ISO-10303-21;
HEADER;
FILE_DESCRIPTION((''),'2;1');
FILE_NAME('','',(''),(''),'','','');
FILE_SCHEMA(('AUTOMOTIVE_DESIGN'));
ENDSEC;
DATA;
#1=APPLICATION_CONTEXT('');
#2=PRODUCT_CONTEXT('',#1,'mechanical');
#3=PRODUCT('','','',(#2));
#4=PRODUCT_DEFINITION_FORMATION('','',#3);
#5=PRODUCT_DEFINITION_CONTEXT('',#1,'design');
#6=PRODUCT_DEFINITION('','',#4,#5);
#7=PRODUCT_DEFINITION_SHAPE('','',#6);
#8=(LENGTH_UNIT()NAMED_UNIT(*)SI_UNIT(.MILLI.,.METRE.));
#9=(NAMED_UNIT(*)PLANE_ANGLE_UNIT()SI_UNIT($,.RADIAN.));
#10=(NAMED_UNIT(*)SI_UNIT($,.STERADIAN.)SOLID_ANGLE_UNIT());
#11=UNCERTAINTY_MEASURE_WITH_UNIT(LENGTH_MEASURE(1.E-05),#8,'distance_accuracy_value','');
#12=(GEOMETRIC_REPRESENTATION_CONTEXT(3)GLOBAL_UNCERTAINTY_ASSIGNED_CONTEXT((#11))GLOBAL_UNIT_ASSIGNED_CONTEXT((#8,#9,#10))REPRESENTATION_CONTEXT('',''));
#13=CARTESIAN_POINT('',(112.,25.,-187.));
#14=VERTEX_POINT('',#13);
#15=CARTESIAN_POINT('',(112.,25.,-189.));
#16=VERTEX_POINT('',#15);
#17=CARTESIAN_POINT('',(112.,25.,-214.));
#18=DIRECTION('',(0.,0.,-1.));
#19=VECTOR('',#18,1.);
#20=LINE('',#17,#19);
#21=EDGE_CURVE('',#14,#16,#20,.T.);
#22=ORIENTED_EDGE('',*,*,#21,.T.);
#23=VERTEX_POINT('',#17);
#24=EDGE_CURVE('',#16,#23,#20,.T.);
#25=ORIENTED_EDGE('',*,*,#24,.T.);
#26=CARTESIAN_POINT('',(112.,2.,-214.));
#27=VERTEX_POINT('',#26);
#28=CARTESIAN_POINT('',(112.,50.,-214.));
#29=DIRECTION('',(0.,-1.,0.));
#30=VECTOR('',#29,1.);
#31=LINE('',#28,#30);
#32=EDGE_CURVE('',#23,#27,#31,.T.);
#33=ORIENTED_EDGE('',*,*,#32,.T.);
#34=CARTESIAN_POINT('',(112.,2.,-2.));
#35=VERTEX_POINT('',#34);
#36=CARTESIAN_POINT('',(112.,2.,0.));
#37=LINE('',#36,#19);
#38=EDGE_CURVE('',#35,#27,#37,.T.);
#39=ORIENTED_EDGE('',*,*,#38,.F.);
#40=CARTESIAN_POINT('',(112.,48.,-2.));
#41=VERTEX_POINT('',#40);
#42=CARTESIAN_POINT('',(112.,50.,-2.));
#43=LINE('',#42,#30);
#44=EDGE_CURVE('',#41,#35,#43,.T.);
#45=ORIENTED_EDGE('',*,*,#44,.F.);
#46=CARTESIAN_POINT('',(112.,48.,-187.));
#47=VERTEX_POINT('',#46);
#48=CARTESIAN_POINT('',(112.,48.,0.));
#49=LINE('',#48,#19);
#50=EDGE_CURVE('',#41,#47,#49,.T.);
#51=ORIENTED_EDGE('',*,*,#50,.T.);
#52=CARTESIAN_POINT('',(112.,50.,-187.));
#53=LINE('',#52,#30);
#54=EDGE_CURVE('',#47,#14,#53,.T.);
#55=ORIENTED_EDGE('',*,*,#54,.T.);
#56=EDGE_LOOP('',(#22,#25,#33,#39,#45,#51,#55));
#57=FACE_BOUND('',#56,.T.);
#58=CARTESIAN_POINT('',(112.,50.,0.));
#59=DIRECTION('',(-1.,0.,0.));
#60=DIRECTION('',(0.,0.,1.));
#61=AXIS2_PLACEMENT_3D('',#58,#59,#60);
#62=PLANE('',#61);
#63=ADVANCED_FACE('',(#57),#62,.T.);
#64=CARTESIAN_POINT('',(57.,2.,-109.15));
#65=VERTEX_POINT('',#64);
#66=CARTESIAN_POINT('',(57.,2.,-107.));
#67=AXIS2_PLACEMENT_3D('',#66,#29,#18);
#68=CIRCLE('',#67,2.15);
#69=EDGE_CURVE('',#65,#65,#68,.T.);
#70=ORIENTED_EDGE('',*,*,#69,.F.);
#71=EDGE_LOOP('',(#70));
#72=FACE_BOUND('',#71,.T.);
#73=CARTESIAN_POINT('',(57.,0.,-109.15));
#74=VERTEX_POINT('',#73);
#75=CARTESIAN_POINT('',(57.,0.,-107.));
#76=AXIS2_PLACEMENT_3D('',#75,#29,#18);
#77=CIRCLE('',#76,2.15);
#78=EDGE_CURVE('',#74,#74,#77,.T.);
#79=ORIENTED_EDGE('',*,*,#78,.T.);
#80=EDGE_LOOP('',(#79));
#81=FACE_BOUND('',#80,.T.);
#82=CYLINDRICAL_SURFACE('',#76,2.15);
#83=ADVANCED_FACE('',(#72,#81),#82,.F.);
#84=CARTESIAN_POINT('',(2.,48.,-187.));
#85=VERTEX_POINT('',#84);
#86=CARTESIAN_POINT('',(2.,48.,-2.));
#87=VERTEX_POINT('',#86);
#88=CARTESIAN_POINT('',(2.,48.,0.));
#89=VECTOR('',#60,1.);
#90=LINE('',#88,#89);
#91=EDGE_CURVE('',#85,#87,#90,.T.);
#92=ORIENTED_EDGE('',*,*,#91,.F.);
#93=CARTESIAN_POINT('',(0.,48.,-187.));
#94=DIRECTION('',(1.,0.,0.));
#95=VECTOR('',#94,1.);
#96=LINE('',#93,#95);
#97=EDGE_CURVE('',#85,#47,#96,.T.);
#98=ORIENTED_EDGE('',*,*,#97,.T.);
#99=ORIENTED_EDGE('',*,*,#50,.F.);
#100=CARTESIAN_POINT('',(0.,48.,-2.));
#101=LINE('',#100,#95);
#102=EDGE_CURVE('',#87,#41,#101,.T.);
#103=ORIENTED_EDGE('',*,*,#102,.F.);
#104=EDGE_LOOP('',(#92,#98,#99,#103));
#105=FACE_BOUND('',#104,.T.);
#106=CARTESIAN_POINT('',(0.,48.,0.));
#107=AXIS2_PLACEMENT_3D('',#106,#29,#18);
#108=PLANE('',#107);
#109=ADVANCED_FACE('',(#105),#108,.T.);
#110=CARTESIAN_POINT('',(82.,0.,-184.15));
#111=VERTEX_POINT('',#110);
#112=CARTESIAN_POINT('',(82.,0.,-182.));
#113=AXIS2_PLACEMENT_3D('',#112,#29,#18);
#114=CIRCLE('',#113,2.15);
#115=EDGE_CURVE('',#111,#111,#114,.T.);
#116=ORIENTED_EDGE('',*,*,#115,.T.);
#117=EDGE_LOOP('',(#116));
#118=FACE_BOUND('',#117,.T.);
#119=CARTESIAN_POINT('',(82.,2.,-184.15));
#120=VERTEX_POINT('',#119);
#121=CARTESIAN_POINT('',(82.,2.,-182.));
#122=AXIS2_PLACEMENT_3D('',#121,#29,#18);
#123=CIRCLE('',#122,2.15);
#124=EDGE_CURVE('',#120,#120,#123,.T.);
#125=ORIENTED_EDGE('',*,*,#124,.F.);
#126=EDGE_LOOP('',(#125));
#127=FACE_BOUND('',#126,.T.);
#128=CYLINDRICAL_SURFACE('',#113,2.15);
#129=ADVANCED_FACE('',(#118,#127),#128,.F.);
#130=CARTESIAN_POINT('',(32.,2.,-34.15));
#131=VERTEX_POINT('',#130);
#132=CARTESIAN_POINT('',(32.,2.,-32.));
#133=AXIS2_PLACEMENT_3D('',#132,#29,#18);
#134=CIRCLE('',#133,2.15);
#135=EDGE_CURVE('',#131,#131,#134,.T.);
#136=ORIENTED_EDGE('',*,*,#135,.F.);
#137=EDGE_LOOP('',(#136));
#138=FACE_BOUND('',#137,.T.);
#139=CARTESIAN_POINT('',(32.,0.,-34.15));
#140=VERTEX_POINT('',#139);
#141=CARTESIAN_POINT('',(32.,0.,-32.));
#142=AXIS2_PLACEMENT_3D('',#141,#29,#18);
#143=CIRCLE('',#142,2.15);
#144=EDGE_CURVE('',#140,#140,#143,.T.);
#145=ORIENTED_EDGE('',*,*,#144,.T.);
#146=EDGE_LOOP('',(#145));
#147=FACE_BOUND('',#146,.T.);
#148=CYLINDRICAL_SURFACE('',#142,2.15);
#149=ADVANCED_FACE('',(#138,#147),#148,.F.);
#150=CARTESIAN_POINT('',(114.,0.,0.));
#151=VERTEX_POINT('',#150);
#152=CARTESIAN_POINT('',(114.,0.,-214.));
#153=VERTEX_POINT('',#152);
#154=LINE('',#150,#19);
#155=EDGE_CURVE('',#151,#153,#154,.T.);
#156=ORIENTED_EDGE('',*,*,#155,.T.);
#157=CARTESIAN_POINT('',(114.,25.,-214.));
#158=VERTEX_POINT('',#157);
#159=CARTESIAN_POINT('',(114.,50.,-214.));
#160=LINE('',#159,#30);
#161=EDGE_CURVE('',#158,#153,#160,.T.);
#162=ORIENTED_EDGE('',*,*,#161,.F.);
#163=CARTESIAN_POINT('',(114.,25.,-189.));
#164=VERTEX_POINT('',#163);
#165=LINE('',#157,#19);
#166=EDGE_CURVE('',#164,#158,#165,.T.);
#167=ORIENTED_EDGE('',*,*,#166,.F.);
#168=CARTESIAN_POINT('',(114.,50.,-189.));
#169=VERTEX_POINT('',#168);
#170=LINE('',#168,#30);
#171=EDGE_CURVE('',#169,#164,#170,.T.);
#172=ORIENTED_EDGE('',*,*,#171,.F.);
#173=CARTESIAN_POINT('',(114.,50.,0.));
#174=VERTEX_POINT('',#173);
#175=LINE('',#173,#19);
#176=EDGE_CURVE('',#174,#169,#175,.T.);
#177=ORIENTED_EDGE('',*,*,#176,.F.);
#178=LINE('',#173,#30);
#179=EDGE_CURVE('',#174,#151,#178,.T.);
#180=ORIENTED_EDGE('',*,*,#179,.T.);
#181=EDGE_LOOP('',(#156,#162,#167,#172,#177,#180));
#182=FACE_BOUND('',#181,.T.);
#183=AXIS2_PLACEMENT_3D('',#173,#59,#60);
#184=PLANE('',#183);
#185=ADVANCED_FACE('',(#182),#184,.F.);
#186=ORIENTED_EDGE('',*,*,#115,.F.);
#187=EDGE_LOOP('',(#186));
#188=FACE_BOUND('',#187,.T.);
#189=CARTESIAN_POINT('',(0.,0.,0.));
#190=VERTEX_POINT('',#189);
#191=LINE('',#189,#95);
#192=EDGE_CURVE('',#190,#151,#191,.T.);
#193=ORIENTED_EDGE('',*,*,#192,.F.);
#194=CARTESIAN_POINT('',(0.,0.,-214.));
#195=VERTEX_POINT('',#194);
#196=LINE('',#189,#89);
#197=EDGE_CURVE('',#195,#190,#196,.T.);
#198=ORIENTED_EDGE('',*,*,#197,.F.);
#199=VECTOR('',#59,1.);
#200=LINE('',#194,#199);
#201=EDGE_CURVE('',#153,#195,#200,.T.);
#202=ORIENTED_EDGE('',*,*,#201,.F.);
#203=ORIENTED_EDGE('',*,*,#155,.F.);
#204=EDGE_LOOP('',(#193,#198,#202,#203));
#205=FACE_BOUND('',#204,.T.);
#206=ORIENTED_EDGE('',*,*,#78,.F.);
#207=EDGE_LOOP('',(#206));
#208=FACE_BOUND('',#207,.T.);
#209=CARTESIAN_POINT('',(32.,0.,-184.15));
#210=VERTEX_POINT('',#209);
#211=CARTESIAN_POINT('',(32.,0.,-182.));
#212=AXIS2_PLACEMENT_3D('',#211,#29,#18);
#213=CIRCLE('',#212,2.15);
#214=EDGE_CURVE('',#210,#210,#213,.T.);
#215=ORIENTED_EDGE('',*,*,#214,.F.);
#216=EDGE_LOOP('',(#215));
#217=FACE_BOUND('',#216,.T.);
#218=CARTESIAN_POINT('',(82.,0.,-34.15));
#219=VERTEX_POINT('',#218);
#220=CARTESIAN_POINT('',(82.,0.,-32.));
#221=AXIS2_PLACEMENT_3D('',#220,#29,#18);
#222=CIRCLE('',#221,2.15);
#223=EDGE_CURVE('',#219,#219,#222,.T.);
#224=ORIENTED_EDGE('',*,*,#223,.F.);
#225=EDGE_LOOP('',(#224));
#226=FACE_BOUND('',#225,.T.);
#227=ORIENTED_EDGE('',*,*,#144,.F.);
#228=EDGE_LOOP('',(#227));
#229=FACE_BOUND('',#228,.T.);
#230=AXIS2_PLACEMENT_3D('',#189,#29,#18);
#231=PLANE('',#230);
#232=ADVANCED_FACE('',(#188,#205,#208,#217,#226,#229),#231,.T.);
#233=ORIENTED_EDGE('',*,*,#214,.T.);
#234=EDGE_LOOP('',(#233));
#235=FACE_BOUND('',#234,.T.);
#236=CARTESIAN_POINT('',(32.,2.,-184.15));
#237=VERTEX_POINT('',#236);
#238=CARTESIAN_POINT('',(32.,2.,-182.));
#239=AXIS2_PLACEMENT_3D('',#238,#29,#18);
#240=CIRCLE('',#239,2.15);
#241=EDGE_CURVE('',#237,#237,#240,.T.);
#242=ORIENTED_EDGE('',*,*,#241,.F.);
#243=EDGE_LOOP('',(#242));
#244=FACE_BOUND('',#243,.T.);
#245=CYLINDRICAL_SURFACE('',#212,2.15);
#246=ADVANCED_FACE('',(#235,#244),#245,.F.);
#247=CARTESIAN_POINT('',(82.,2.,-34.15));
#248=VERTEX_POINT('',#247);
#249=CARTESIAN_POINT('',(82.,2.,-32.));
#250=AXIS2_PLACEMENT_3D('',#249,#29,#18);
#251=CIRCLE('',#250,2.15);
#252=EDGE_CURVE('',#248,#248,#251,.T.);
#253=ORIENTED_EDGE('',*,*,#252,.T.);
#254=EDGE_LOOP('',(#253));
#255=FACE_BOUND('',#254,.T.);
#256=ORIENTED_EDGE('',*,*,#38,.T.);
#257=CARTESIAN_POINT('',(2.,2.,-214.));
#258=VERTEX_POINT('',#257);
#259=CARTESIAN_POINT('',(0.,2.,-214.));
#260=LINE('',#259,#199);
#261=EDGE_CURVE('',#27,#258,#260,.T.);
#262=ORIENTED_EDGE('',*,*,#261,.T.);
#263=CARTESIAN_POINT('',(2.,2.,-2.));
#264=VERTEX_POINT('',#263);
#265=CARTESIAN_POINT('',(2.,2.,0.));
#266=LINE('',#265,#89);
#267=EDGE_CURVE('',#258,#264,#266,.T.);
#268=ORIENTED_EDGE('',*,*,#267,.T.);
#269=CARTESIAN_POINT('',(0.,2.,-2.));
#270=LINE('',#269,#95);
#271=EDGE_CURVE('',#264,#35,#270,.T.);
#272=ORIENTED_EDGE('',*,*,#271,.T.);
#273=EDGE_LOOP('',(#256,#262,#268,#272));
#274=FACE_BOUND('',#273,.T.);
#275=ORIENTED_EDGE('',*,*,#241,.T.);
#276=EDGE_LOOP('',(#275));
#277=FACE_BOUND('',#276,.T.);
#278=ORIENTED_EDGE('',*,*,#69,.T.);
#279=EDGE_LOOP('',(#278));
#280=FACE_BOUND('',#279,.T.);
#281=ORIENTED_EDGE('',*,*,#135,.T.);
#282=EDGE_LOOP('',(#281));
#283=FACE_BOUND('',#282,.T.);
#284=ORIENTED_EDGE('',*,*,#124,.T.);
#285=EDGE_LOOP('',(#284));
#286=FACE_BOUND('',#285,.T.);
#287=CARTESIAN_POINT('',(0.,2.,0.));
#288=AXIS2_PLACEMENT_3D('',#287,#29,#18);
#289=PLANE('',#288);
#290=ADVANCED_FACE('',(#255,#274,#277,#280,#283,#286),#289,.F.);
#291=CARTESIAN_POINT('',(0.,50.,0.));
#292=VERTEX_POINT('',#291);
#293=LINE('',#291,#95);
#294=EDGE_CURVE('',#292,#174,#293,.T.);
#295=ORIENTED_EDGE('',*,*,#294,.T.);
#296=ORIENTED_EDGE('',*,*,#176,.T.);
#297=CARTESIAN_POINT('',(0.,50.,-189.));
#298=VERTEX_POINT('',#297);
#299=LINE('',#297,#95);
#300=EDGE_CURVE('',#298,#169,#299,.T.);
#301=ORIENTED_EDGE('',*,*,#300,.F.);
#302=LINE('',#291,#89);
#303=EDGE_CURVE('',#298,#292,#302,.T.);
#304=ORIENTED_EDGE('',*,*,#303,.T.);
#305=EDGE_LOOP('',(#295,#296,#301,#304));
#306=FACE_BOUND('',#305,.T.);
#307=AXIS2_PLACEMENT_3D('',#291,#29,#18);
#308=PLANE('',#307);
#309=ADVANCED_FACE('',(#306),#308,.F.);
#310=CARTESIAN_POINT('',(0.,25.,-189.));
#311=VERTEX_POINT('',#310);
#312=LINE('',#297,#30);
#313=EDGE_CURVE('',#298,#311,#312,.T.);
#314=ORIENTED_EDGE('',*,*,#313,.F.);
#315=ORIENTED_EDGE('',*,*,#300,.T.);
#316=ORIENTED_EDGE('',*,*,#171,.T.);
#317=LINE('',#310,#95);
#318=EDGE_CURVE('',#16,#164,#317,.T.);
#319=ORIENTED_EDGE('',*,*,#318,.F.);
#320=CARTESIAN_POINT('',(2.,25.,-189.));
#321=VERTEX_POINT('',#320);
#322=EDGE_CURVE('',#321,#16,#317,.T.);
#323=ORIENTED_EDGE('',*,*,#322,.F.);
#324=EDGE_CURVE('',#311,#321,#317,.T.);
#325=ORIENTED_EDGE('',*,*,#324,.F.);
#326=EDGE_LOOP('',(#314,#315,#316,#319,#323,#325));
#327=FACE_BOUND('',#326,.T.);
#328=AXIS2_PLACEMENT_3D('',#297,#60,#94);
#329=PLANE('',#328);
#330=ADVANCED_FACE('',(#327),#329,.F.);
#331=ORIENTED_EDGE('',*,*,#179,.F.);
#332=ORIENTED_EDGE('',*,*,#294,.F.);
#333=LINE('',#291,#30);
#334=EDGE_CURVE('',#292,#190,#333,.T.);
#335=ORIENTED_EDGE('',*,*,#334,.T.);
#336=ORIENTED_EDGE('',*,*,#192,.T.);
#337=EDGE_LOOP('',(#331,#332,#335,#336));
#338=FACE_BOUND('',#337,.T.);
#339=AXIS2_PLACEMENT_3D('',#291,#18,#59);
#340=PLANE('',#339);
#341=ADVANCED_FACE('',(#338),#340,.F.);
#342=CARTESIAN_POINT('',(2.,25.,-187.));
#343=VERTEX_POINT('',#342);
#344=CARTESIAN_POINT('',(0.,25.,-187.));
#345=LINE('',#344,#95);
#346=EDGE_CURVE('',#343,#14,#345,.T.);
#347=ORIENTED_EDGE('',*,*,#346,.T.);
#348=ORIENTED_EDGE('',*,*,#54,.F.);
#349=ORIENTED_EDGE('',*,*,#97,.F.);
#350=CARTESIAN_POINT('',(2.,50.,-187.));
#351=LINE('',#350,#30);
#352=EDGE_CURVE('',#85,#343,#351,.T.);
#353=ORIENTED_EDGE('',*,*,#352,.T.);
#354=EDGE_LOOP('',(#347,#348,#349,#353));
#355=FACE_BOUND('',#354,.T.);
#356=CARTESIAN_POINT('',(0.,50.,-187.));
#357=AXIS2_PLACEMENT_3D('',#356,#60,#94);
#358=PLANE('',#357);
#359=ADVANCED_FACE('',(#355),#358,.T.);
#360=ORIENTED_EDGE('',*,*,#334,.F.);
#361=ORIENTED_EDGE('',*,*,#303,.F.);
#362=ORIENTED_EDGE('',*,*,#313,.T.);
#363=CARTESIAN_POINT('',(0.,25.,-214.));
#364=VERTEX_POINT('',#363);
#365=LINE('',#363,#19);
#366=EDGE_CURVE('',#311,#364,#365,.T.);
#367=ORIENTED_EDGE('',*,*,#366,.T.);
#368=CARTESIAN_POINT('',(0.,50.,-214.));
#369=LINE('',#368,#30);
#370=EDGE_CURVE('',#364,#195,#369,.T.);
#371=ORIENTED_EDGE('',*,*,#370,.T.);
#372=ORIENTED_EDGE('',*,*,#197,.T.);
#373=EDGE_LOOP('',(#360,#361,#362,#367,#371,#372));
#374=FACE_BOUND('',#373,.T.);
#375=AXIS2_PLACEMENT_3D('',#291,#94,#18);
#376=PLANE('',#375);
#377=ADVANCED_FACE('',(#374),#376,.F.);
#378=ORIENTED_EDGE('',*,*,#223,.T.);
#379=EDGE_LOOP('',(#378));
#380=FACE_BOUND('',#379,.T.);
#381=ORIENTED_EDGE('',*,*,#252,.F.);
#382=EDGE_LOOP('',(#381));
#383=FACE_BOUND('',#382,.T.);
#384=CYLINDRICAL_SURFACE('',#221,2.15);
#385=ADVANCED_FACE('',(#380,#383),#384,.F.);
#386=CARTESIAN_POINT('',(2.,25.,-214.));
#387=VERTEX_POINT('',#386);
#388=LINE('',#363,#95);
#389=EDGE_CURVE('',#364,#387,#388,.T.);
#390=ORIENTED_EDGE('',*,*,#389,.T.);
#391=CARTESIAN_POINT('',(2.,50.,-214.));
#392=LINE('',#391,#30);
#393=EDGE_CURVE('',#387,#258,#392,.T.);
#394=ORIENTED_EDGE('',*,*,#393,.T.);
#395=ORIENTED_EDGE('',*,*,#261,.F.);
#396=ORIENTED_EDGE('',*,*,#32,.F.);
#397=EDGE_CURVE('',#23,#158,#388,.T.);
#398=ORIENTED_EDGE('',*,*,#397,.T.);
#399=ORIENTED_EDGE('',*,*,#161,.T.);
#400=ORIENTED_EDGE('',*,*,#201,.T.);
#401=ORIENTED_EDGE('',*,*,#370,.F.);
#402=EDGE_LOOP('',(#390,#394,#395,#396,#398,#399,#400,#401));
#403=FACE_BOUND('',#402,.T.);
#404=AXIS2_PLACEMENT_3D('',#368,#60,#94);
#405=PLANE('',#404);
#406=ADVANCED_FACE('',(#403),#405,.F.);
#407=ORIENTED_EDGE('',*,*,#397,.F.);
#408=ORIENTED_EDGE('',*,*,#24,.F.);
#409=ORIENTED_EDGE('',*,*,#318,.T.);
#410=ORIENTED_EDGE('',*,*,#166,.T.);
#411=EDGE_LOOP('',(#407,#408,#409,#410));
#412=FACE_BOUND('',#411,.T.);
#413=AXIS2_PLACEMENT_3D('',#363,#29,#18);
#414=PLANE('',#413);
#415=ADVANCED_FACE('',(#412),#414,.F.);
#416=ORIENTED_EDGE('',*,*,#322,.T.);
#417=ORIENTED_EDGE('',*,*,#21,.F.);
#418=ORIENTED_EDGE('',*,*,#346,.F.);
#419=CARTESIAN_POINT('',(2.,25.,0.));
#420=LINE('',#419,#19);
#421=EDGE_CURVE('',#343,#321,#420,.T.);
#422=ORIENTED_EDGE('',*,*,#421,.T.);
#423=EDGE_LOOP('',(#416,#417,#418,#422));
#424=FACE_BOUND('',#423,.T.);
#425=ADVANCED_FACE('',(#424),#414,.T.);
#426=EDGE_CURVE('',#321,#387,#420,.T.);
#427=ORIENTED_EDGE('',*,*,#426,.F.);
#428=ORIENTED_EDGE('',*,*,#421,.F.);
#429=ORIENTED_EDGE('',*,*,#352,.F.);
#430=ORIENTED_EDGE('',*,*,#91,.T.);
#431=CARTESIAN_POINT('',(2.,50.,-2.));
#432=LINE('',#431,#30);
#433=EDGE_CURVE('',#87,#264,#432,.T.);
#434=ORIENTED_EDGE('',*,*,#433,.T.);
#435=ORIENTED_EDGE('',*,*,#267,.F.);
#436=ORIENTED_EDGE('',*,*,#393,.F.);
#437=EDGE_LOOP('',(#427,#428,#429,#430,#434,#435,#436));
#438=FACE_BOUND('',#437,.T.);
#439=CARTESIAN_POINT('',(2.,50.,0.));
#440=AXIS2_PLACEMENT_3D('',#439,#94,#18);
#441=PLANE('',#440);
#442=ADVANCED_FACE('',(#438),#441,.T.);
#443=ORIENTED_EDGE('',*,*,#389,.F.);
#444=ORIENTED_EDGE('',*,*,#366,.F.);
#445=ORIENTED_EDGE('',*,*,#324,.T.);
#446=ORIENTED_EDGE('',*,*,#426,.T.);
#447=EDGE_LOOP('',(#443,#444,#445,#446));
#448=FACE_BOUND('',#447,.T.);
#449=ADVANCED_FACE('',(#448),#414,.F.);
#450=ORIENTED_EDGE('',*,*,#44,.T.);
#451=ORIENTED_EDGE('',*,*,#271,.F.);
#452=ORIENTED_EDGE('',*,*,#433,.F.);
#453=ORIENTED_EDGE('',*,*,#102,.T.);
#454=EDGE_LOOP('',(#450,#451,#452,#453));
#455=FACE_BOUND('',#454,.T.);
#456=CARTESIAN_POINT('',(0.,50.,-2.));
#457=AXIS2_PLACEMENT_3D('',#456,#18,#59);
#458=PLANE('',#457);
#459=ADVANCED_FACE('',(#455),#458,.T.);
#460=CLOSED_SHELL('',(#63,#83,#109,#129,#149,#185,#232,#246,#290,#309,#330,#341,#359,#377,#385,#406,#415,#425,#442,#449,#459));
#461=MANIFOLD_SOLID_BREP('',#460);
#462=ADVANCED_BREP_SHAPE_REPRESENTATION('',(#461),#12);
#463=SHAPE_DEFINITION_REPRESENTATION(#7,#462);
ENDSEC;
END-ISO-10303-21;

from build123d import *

# Parameters (mm, degrees)
SKETCH1_W                = 114
SKETCH1_H                = 214
BOSS_EXTRUDE1_DEPTH      = 50
SKETCH4_W                = 25
SKETCH4_H                = 25
CUT_EXTRUDE1_DEPTH       = 248.572211688
SHELL1_START             = 2
SHELL1_OUTLINE_W         = 110
SHELL1_OUTLINE_H         = 185
SHELL1_DEPTH             = 46
SHELL1_2_OUTLINE_W       = 110
SHELL1_2_OUTLINE_H       = 27
SHELL1_2_DEPTH           = 23
M4_CLEARANCE_HOLE1_D     = 4.3
M4_CLEARANCE_HOLE1_DEPTH = 4
M4_CLEARANCE_HOLE1_TIP   = 1.291850331


# Read off the part's stored shape, not the designer's step: Shell1
with BuildPart() as part:
    # Sketch1 → Boss-Extrude1 (new body)
    with BuildSketch(Plane(origin=(0, 0, 0), x_dir=(1, 0, 0), z_dir=(0, 1, 0))):
        with Locations((57, 107)):
            Rectangle(SKETCH1_W, SKETCH1_H)
    extrude(amount=BOSS_EXTRUDE1_DEPTH)

    # Sketch4 → Cut-Extrude1 (cut, through all)
    with BuildSketch(Plane(origin=(114, 0, 0), x_dir=(0, 0, -1), z_dir=(1, 0, 0))):
        with Locations((201.5, 37.5)):
            Rectangle(SKETCH4_W, SKETCH4_H)
    extrude(amount=-CUT_EXTRUDE1_DEPTH, mode=Mode.SUBTRACT)

    # Shell1 outline → Shell1 (cut)
    with BuildSketch(Plane(origin=(0, 0, 0), x_dir=(1, 0, 0), z_dir=(0, 1, 0)).offset(SHELL1_START)):
        with Locations((57, 94.5)):
            Rectangle(SHELL1_OUTLINE_W, SHELL1_OUTLINE_H)
    extrude(amount=SHELL1_DEPTH, mode=Mode.SUBTRACT)

    # Shell1 2 outline → Shell1 2 (cut)
    with BuildSketch(Plane(origin=(0, 0, 0), x_dir=(1, 0, 0), z_dir=(0, 1, 0)).offset(SHELL1_START)):
        with Locations((57, 200.5)):
            Rectangle(SHELL1_2_OUTLINE_W, SHELL1_2_OUTLINE_H)
    extrude(amount=SHELL1_2_DEPTH, mode=Mode.SUBTRACT)

    # M4 Clearance Hole1
    with Locations(Plane(origin=(0, 0, 0), x_dir=(-1, 0, 0), z_dir=(0, -1, 0))):
        with Locations((-32, 32), (-57, 107), (-32, 182), (-82, 32), (-82, 182)):
            Hole(M4_CLEARANCE_HOLE1_D / 2, depth=M4_CLEARANCE_HOLE1_DEPTH)
            with Locations((0, 0, -(M4_CLEARANCE_HOLE1_DEPTH + M4_CLEARANCE_HOLE1_TIP / 2))):  # 118° drill point
                Cone(0, M4_CLEARANCE_HOLE1_D / 2, M4_CLEARANCE_HOLE1_TIP, mode=Mode.SUBTRACT)


solid = part.part
